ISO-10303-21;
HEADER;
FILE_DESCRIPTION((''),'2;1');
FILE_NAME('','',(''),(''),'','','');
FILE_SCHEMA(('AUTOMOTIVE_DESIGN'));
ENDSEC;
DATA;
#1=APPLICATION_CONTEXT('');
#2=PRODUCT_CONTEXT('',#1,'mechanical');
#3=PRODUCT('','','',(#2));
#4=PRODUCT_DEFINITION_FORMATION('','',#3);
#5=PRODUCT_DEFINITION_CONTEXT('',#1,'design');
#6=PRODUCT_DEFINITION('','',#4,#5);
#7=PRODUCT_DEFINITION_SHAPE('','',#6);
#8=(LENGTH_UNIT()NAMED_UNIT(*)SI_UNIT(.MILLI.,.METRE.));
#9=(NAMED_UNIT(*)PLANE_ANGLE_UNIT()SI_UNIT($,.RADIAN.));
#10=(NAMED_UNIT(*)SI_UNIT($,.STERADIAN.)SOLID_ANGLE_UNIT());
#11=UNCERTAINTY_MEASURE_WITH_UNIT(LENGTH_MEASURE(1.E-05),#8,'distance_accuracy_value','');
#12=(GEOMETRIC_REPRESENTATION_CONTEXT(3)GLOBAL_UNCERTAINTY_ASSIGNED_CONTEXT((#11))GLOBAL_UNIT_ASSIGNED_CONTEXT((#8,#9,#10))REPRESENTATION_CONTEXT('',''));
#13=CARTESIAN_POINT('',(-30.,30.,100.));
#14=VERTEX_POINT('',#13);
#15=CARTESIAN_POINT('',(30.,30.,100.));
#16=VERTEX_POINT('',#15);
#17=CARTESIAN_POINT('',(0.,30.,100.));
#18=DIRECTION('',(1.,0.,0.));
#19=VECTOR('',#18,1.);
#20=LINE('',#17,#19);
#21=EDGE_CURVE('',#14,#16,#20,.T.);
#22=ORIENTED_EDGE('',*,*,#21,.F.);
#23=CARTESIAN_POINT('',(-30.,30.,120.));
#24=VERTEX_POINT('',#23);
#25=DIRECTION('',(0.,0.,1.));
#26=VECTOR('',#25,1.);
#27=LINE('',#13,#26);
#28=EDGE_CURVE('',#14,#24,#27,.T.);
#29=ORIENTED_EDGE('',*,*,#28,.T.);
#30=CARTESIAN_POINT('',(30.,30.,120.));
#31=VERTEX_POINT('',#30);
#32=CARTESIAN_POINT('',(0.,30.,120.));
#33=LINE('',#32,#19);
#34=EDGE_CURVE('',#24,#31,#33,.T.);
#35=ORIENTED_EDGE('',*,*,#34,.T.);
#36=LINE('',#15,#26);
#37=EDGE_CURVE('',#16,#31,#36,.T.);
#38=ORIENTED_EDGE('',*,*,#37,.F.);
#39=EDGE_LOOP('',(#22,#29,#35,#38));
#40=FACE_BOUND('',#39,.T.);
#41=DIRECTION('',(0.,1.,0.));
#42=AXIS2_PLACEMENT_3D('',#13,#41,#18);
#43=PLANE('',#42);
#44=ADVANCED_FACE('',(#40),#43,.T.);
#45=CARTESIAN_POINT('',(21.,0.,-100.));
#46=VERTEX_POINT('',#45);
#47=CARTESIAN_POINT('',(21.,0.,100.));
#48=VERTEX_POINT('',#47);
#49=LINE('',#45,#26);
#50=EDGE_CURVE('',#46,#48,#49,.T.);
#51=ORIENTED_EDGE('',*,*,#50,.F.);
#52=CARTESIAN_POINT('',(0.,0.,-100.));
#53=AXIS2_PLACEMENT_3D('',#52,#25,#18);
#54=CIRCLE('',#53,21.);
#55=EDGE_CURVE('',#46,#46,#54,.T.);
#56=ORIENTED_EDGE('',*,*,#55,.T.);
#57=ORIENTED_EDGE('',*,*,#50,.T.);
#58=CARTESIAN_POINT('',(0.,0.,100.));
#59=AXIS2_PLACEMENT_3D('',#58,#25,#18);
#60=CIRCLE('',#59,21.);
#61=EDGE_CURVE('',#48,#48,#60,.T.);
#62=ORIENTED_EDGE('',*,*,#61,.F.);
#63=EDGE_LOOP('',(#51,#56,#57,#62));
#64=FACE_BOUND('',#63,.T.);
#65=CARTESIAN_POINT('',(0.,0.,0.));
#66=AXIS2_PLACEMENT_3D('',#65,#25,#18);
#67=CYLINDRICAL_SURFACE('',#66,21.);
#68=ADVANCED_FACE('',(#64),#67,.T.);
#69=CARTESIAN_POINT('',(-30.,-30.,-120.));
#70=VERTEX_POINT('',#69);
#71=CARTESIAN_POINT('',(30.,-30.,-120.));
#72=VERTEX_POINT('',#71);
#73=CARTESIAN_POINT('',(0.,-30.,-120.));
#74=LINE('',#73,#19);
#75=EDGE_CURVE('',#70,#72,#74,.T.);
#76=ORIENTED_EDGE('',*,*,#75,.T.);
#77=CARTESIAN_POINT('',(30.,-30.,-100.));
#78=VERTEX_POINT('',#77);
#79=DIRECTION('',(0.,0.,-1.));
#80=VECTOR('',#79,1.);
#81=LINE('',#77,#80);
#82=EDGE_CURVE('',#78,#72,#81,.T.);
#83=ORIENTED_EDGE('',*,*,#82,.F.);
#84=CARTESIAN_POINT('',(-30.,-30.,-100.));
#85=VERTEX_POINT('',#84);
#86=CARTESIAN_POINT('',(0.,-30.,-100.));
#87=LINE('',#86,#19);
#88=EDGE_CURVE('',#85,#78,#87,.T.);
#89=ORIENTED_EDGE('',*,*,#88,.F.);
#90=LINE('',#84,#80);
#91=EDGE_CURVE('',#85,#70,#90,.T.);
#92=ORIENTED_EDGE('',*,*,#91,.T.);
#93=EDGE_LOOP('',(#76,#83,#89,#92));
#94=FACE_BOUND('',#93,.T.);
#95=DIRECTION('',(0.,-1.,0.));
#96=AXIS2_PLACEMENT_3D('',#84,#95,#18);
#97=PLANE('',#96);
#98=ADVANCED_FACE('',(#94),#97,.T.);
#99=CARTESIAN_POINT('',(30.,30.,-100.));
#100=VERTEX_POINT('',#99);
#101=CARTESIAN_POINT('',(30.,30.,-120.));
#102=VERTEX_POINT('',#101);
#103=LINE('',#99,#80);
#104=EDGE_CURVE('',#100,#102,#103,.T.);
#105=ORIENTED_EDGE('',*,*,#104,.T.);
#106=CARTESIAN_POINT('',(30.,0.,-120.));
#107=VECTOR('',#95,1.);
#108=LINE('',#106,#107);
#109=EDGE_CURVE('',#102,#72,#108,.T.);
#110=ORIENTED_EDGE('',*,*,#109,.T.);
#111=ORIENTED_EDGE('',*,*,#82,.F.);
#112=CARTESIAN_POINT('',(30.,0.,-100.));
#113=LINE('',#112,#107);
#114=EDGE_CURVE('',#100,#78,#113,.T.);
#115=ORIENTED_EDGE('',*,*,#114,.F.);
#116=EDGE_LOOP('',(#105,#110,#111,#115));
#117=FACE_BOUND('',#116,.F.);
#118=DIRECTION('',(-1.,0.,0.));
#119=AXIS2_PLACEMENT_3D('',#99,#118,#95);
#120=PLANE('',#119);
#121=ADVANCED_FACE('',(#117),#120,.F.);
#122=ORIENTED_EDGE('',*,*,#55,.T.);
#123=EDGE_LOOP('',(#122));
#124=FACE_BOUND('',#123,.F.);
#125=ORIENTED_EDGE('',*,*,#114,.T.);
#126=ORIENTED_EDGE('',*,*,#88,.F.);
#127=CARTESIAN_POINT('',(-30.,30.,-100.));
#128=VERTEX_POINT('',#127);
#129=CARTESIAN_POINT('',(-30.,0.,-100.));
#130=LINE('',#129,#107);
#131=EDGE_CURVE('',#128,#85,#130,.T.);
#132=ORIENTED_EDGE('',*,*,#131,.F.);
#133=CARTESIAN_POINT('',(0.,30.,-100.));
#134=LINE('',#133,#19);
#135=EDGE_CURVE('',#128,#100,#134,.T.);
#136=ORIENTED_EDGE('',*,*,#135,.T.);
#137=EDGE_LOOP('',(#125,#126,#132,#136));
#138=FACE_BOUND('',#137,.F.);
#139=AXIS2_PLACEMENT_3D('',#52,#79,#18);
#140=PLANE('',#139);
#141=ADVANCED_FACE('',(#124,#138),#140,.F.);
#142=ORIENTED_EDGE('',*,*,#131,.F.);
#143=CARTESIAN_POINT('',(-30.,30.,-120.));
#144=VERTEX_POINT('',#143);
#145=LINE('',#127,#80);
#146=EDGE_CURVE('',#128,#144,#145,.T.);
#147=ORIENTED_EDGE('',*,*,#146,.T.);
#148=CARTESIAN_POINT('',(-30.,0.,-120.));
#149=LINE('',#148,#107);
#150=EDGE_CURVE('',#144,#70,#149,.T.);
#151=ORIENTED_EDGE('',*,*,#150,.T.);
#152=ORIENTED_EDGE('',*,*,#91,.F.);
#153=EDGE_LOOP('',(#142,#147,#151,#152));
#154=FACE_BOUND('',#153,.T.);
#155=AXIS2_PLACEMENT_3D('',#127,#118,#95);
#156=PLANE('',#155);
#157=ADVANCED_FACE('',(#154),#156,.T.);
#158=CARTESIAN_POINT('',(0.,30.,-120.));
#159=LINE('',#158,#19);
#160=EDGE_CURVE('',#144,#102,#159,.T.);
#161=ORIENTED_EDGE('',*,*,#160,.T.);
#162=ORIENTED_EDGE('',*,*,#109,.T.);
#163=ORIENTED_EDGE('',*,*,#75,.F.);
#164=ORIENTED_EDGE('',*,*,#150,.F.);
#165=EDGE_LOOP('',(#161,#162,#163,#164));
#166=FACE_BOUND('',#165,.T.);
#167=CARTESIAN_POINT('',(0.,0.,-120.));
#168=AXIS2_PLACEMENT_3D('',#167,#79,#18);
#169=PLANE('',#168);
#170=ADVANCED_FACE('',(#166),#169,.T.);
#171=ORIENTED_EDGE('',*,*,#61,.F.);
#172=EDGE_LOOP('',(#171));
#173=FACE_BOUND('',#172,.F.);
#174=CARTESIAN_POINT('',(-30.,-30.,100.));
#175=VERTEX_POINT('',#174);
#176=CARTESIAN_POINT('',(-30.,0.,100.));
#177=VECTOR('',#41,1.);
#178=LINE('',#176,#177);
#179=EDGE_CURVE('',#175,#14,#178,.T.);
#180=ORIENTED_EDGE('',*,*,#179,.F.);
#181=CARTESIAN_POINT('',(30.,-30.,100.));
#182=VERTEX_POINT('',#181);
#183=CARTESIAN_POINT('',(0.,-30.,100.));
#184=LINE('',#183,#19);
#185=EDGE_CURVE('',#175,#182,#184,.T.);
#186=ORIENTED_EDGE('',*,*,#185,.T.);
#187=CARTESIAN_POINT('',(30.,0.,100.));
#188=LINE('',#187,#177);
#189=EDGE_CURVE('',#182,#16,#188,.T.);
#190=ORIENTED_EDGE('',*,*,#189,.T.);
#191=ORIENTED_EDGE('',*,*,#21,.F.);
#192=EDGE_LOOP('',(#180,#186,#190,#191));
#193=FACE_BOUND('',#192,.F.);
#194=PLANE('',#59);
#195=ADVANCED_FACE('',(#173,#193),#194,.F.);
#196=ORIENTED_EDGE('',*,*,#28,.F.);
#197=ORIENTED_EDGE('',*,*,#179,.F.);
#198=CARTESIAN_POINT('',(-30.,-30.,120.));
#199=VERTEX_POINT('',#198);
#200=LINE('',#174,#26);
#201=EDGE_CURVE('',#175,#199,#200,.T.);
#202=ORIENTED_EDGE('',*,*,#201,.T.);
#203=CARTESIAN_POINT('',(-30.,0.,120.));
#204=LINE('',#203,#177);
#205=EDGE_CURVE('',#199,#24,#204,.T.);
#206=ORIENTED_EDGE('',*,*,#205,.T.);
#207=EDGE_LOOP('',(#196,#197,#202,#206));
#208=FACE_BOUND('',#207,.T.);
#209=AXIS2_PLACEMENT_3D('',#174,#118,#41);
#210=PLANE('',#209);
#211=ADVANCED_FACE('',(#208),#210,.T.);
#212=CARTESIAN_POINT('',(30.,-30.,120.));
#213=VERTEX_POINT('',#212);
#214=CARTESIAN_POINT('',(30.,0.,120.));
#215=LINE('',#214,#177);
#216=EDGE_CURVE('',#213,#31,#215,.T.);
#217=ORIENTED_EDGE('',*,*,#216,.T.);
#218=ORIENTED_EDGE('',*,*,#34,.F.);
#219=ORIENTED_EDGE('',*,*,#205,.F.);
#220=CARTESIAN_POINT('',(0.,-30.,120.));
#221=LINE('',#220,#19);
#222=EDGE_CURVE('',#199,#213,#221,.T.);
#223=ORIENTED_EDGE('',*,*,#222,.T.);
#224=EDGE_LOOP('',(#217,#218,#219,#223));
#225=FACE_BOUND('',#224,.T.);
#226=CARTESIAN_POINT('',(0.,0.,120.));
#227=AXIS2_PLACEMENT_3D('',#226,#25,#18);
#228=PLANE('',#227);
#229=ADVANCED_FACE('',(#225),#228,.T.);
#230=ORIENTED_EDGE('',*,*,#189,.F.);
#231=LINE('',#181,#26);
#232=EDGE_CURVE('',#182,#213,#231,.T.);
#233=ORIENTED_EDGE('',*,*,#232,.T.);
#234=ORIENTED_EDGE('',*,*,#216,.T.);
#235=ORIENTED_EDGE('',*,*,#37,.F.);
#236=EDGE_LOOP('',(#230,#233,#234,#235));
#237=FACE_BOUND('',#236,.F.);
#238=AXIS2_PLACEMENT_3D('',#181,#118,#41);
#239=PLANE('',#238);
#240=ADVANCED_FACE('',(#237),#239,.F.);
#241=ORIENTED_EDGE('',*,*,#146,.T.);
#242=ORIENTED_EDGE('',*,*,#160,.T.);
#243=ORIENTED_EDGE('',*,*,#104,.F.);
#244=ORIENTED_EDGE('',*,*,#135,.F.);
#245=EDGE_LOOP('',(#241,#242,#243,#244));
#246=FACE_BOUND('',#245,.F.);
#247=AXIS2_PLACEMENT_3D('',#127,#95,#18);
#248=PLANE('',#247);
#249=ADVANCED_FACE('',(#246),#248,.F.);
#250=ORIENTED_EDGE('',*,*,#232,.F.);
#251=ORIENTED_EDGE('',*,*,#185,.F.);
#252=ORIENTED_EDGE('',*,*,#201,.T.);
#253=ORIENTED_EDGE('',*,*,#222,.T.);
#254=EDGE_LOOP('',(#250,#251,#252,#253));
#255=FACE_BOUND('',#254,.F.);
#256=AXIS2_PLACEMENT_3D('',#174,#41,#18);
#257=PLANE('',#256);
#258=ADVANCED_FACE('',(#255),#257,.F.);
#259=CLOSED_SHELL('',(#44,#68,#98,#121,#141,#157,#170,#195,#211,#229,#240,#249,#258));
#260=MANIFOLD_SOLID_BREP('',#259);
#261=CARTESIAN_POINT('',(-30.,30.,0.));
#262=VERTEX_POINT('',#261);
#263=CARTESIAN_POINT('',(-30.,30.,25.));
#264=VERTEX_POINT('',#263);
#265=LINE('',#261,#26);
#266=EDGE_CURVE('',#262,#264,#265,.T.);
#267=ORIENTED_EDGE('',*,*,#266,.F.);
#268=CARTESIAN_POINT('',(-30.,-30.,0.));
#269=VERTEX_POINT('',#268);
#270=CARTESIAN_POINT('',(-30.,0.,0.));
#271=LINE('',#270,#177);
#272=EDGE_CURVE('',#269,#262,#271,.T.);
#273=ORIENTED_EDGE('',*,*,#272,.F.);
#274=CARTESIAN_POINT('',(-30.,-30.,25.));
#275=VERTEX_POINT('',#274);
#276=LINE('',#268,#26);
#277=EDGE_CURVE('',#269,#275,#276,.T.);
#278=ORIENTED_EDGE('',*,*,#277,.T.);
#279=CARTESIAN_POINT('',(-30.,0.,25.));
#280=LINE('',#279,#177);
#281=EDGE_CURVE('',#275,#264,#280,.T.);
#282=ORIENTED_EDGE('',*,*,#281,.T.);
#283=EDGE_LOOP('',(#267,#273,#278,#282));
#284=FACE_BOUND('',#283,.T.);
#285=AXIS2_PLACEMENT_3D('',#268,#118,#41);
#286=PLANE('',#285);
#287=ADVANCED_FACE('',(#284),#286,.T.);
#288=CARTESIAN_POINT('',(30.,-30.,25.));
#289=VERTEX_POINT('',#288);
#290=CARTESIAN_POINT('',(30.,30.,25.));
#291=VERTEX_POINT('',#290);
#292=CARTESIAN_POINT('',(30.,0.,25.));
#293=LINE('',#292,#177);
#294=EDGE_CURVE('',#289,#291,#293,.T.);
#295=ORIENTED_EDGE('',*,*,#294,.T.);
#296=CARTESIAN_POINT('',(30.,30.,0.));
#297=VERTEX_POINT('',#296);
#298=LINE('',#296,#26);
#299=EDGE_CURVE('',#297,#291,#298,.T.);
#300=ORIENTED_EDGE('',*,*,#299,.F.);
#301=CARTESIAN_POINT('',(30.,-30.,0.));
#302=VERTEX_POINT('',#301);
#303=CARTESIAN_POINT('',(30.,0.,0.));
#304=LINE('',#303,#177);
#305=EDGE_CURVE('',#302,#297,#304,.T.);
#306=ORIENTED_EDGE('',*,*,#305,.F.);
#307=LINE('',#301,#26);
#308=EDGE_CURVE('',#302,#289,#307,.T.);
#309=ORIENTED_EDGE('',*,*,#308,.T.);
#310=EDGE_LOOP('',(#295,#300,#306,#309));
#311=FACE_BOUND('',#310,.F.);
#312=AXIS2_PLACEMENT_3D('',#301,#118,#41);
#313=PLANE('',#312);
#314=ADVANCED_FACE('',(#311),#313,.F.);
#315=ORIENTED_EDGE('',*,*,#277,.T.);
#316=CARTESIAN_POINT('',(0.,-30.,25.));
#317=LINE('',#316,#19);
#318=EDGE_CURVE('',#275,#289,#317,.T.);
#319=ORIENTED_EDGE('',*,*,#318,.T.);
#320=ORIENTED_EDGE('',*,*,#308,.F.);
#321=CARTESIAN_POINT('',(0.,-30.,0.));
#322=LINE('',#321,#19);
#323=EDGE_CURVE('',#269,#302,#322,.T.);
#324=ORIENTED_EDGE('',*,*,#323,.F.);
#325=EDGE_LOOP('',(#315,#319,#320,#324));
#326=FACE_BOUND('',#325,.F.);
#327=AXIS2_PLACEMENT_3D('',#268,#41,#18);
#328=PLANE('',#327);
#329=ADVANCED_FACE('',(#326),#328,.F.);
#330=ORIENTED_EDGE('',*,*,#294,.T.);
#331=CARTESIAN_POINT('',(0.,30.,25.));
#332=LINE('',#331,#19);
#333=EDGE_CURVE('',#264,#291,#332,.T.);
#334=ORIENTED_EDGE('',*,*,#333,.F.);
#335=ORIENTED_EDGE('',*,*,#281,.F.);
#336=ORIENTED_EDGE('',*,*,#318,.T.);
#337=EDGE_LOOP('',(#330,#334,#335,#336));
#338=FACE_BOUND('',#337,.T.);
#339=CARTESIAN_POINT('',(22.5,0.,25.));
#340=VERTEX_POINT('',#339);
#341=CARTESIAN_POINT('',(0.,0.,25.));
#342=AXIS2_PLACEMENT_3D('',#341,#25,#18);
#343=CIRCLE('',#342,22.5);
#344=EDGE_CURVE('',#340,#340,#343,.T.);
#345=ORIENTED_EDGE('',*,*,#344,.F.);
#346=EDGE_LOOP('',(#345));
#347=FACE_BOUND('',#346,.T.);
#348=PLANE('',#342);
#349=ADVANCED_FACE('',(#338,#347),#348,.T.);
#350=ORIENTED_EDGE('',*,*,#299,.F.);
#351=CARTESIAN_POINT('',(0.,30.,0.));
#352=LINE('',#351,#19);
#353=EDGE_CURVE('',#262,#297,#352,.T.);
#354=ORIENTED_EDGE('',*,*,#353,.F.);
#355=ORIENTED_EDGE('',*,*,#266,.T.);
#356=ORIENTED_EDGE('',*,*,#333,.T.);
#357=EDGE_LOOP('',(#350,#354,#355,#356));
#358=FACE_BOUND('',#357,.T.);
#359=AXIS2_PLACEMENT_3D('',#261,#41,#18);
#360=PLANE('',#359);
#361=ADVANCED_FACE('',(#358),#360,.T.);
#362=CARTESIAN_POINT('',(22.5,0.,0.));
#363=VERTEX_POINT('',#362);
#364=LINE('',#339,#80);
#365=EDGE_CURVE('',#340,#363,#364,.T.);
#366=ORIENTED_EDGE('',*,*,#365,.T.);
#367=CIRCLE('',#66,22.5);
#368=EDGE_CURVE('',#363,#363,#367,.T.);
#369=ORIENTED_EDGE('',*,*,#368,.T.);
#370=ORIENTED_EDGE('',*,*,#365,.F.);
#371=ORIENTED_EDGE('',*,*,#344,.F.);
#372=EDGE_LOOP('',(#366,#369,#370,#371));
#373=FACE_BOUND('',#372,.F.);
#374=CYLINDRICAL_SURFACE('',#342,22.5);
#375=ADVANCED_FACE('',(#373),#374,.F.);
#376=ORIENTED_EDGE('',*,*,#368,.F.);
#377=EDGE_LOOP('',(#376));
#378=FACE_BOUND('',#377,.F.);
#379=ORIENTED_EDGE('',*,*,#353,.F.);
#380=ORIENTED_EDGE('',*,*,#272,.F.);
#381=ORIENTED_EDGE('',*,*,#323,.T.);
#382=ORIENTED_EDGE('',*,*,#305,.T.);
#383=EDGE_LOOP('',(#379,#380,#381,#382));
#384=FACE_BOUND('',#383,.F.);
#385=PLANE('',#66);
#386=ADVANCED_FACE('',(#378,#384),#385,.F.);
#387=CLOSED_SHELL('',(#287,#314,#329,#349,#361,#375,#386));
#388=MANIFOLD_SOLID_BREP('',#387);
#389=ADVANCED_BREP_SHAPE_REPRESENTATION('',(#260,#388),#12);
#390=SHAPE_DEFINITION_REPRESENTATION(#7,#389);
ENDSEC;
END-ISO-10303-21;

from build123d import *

# Parameters (mm, degrees)
F0_W     = 60
F0_H     = 60
F1_DEPTH = 25
F2_R     = 22.5
F3_DEPTH = 25.001
F4_R     = 21
F5_DEPTH = 100
F6_W     = 60
F6_H     = 60
F6_R     = 21
F7_DEPTH = 20
F8_W     = 60
F8_H     = 60
F8_R     = 21
F9_DEPTH = 20


with BuildPart() as f1:
    # F0 (on Top) → F1 (new body)
    with BuildSketch(Plane.XY):
        Rectangle(F0_W, F0_H)
    extrude(amount=F1_DEPTH)

    # F2 (on face) → F3 (cut, through all)
    with BuildSketch(Plane.XY.offset(25)):
        Circle(F2_R)
    extrude(amount=-F3_DEPTH, mode=Mode.SUBTRACT)


with BuildPart() as f5:
    # F4 (on Top) → F5 (new body, symmetric)
    with BuildSketch(Plane.XY):
        Circle(F4_R)
    extrude(amount=F5_DEPTH, both=True)

    # F6 (on face) → F7 (join)
    with BuildSketch(Plane.XY.offset(100)):
        Rectangle(F6_W, F6_H)
        Circle(F6_R, mode=Mode.SUBTRACT)
        Circle(F6_R)
    extrude(amount=F7_DEPTH)

    # F8 (on face) → F9 (join)
    with BuildSketch(Plane(origin=(0, 0, -100), x_dir=(1, 0, 0), z_dir=(0, 0, -1))):
        Rectangle(F8_W, F8_H)
        Circle(F8_R, mode=Mode.SUBTRACT)
        Circle(F8_R)
    extrude(amount=F9_DEPTH)


solid = Compound([f1.part, f5.part])
